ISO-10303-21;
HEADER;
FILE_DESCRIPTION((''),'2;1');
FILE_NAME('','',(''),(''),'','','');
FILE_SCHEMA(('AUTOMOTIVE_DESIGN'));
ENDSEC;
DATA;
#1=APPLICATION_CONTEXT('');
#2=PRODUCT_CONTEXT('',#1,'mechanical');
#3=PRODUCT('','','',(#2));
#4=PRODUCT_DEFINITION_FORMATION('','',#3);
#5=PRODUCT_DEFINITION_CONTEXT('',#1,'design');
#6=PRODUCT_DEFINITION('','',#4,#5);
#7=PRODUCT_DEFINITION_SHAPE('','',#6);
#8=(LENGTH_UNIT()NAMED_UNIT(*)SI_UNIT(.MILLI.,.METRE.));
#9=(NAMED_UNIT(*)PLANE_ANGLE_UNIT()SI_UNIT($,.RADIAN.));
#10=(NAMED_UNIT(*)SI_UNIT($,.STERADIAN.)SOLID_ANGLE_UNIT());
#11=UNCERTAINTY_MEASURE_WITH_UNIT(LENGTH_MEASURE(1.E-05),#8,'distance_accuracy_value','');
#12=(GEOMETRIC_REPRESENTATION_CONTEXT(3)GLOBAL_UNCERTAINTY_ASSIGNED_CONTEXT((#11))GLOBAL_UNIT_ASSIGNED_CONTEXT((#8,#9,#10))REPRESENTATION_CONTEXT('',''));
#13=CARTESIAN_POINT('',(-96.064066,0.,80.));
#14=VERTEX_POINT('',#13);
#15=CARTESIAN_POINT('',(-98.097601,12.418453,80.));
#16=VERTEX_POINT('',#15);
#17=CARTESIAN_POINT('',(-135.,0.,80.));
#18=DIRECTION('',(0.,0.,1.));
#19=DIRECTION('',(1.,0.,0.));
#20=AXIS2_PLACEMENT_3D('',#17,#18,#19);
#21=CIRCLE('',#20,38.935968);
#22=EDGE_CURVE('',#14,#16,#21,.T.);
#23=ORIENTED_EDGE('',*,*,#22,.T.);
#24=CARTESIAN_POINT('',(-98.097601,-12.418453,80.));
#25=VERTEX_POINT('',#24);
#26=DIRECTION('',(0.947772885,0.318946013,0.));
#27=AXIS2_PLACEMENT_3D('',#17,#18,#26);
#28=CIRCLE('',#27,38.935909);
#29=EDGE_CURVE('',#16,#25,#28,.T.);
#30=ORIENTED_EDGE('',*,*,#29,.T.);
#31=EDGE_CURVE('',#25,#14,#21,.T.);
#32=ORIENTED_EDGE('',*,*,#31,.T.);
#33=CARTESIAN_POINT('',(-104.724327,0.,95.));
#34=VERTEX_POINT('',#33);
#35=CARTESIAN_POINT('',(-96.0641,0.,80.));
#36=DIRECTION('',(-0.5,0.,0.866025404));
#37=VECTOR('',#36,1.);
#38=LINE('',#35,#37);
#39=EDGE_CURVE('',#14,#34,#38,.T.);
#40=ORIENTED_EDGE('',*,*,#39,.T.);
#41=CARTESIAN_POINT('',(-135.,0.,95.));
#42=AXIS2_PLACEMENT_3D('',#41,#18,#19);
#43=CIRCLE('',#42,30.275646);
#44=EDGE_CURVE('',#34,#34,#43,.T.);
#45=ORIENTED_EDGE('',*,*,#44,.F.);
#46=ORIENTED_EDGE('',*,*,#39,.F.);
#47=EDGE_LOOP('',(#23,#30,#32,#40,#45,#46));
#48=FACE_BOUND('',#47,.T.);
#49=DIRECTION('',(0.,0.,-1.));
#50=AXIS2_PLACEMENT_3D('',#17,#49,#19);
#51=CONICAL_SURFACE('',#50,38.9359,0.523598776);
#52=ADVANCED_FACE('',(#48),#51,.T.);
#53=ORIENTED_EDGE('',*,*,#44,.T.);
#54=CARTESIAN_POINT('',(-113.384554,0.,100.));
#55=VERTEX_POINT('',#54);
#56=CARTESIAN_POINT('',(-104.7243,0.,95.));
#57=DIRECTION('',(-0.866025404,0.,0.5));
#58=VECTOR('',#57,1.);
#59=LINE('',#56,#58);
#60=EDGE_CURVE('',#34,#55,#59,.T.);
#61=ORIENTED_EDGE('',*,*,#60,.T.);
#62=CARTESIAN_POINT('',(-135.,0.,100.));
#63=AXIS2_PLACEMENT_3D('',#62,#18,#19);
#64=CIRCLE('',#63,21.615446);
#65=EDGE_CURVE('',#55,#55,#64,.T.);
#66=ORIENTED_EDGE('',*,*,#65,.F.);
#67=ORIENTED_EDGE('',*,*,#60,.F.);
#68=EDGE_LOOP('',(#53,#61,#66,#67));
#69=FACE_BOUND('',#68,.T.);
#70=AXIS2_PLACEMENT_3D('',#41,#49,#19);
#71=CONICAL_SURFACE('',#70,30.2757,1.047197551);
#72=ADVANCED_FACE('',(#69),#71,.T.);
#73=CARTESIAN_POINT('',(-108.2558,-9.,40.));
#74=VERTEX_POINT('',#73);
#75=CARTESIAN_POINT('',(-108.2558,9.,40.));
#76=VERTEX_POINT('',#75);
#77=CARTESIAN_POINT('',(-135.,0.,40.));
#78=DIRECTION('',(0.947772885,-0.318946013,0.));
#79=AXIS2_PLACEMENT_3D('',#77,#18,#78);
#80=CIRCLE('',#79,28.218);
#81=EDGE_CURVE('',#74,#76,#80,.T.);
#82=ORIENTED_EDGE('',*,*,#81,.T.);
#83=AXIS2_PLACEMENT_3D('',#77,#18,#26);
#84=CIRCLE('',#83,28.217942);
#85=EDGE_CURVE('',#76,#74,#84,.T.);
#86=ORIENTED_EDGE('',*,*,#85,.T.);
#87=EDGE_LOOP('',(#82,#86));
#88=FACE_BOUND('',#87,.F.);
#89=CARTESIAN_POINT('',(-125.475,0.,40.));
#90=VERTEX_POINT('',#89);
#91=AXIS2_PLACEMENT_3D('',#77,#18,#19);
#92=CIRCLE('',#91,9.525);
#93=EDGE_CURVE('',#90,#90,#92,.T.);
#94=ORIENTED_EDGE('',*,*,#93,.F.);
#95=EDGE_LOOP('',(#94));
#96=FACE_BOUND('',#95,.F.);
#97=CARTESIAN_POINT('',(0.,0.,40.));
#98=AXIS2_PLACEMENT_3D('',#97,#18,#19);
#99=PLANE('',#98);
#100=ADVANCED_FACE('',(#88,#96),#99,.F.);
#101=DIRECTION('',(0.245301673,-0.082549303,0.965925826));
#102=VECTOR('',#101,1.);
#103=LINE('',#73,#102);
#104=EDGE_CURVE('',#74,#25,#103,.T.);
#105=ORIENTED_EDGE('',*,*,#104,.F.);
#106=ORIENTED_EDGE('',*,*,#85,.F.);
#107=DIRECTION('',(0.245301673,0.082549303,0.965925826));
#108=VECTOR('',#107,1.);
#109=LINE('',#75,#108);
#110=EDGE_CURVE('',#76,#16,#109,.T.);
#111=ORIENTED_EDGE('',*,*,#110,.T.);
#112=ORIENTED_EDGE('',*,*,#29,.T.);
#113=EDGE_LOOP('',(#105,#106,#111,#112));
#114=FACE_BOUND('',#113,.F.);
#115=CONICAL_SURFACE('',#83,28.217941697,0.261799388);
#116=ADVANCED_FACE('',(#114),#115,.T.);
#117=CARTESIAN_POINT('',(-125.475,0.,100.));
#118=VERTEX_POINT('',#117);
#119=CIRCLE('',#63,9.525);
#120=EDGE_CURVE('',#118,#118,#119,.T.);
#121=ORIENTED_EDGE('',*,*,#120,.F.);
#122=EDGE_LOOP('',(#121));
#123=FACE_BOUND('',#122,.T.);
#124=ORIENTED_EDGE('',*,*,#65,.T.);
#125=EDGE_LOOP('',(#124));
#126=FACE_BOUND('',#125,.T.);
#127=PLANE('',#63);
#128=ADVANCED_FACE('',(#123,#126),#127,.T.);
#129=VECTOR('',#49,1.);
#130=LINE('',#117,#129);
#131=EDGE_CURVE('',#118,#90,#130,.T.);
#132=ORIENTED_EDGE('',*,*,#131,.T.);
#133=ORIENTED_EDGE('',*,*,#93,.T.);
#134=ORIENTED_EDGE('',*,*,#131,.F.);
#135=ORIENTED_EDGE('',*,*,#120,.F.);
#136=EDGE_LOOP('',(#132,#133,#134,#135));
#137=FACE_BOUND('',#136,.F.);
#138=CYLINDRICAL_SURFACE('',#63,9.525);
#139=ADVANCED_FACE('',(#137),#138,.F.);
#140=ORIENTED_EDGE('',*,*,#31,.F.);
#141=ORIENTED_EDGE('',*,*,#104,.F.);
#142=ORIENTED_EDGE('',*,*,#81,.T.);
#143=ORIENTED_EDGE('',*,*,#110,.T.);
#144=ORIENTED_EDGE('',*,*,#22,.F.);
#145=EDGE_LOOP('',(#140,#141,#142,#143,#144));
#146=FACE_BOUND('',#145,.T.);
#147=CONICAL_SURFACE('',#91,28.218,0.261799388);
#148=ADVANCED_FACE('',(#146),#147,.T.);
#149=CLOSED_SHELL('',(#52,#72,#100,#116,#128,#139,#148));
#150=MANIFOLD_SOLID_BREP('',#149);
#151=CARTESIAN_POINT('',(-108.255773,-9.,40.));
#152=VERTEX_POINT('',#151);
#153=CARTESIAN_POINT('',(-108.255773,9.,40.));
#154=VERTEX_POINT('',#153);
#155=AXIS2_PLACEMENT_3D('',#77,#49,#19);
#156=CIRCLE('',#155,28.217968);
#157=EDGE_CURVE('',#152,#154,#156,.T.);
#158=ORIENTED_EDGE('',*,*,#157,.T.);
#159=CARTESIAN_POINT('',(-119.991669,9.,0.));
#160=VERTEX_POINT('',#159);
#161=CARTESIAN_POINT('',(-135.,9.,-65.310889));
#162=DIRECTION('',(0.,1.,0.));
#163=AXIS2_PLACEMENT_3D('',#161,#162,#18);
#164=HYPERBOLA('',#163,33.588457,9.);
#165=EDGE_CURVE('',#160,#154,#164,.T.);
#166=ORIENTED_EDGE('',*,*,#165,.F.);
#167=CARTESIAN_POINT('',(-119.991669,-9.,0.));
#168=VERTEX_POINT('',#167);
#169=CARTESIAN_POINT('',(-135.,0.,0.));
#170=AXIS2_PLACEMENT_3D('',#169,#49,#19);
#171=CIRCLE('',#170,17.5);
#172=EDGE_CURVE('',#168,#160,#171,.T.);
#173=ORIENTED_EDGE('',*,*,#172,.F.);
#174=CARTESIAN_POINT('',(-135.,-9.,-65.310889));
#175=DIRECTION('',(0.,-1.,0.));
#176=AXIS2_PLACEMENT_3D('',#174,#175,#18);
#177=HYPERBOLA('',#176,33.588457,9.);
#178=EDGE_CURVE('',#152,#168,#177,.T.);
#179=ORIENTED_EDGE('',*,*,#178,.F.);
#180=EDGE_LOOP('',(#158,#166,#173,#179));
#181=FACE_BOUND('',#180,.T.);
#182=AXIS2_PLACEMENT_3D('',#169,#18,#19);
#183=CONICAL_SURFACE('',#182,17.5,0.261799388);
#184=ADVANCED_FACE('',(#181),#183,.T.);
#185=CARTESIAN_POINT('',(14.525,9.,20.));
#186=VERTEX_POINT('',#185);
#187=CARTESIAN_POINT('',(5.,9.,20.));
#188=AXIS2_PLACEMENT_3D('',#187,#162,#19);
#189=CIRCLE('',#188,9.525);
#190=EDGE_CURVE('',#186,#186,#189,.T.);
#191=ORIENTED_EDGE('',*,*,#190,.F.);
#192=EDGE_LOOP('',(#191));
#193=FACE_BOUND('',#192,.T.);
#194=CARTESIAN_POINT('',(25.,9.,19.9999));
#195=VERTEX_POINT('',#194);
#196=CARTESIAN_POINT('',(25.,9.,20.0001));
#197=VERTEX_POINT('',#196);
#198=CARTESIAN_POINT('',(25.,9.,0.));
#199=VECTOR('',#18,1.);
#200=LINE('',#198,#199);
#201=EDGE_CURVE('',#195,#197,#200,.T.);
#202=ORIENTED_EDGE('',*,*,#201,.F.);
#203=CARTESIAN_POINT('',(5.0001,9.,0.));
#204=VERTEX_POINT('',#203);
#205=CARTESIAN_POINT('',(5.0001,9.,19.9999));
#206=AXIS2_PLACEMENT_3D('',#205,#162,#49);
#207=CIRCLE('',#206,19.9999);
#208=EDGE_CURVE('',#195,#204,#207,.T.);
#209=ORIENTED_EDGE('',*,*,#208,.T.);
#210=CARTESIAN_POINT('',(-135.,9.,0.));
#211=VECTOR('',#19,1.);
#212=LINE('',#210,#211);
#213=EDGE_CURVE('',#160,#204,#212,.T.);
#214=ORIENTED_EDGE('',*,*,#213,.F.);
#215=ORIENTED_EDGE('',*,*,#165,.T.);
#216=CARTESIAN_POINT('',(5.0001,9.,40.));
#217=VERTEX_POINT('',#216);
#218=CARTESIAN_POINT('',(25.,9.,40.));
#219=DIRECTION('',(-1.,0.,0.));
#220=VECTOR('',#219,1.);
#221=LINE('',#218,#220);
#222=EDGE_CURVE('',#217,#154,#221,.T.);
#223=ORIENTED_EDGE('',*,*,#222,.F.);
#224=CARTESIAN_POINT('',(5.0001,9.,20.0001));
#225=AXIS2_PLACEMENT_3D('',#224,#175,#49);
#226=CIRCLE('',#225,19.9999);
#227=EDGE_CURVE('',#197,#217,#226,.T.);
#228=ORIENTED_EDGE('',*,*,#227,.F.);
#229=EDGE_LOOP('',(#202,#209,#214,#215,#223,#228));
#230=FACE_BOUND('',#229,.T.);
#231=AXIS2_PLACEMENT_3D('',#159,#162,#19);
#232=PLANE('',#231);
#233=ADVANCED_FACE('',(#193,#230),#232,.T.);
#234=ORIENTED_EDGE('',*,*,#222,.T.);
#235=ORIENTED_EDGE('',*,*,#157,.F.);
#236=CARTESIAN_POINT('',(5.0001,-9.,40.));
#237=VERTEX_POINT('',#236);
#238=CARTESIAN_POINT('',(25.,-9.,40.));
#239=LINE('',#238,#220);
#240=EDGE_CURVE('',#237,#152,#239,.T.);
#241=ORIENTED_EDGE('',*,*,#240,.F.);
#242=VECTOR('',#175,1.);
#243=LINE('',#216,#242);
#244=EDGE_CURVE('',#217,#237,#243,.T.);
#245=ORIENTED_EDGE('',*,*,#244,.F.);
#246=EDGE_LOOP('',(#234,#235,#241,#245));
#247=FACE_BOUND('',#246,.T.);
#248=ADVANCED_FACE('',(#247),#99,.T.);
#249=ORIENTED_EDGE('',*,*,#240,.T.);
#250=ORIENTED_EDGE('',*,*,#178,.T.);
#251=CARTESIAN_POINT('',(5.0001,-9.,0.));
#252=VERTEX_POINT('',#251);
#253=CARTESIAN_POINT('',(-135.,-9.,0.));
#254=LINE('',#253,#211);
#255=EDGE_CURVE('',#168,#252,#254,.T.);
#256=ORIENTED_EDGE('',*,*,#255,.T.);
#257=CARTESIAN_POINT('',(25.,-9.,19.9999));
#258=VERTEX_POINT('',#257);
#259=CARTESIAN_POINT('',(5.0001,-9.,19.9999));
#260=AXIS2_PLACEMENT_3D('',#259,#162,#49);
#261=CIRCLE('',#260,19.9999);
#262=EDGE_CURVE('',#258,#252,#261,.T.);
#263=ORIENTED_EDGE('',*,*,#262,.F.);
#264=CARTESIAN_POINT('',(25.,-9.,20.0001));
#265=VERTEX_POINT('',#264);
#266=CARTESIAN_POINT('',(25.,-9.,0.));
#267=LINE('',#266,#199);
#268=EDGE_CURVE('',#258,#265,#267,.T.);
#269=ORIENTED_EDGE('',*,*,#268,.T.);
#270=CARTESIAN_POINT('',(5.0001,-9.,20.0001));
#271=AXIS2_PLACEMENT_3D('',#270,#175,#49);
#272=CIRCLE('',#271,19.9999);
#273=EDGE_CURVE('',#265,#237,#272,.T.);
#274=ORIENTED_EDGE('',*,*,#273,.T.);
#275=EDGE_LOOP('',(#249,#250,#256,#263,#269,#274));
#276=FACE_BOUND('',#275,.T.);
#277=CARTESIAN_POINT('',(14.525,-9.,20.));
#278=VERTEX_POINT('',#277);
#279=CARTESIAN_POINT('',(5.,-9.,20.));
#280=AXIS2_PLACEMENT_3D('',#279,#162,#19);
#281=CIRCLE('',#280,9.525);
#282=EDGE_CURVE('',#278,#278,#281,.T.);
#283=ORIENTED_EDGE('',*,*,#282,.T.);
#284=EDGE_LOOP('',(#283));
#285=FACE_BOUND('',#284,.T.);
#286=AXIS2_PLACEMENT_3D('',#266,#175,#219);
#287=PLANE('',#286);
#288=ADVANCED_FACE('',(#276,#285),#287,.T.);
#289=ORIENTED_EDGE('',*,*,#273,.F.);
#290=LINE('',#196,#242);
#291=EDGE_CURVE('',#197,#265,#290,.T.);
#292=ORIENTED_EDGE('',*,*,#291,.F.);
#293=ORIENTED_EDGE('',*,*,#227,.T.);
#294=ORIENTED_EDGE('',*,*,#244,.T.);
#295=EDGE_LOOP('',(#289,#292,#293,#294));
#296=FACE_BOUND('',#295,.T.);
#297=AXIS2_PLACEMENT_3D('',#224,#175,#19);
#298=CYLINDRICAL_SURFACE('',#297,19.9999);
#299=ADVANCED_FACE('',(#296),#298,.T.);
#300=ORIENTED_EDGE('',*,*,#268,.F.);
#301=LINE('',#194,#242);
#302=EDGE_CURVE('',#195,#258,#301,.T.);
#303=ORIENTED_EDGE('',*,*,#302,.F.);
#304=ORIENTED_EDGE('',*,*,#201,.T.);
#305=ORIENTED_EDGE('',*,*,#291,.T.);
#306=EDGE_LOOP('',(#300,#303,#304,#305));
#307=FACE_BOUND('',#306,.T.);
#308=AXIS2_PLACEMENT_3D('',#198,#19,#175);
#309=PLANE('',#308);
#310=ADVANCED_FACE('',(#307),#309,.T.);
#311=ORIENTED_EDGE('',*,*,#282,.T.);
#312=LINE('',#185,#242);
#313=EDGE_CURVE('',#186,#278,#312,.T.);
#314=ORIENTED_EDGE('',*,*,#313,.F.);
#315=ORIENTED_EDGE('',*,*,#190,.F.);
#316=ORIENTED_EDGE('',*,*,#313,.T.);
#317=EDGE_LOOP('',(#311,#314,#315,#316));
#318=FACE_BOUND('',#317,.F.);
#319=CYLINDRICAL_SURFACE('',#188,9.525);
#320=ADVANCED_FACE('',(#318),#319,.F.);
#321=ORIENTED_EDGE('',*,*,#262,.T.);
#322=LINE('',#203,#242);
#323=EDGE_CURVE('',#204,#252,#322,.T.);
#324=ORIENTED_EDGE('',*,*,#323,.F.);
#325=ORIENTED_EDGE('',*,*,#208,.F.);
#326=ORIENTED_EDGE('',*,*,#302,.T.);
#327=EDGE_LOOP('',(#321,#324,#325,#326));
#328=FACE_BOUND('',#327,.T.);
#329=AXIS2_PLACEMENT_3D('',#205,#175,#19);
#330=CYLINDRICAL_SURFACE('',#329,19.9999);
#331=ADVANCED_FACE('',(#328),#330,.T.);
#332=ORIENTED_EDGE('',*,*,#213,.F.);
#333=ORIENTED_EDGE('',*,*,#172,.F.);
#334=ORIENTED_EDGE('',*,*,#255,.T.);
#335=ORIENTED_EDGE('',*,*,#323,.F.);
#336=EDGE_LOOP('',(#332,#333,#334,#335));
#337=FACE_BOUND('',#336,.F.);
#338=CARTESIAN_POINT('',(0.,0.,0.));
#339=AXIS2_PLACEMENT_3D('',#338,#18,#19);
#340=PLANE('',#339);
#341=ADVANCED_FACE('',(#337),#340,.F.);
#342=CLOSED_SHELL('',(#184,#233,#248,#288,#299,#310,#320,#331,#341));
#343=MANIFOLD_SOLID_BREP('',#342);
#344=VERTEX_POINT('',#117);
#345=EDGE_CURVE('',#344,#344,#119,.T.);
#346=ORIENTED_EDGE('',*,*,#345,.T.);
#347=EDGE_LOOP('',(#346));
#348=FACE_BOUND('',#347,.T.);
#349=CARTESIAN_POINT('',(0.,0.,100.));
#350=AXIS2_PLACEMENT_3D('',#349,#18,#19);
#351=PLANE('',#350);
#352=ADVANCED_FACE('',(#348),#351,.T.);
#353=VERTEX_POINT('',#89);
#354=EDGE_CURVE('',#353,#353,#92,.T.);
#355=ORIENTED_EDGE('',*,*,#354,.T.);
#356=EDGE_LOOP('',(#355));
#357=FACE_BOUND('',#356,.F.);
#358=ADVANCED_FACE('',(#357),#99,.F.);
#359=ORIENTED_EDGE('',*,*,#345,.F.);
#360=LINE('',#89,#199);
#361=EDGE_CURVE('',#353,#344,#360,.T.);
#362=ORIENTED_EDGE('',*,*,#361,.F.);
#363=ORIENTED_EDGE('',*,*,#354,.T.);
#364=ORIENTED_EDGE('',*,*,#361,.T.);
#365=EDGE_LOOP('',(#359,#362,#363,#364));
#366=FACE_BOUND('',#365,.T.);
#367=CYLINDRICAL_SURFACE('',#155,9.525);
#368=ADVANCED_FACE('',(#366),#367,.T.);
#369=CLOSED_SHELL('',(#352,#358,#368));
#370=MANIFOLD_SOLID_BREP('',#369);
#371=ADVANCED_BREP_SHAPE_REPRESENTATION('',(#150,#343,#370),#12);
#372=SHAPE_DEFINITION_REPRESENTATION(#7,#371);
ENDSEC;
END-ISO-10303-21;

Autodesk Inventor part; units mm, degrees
ref_plane "YZ Plane" through (0, 0, 0) normal (1, 0, 0) x (0, 1, 0)
ref_plane "XZ Plane" through (0, 0, 0) normal (0, 1, 0) x (-1, 0, 0)
ref_plane "XY Plane" through (0, 0, 0) normal (0, 0, 1) x (1, 0, 0)
sketch "Sketch1" plane through (0, 0, 0) normal (0, 0, 1) x (1, 0, 0)
  line L0 (25, -9) -> (-135, -9)
  line L1 (-135, -9) -> (-135, 9)
  line L2 (-135, 9) -> (25, 9)
  line L3 (25, 9) -> (25, -9)
  circle A0 centre (-135, 0) radius 17.5
  point P0 (0, 0)
  dimension "d0" = 160
  dimension "d1" = 18
  dimension "d5" = 35
extrude "Extrusion1" add sketch "Sketch1" along normal blind 40 contours L0 A0 L2 L3 | L0 L1 L2 A0 picked at (-129.1667, 0)
fillet "Fillet1" radius 20 2 edges at (25, 0, 40) (25, 0, 0)
extrude "Extrusion2" add sketch "Sketch1" along normal blind 40 draft 15 contours A0 L2 L1 L0 | L0 L1 L2 A0
sketch "Sketch4" plane through (0, 0, 40) normal (0, 0, 1) x (1, 0, 0)
  line L0 (-108.2558, -9) -> (5, -9) projected
  line L1 (5, 9) -> (5, -9) projected
  line L2 (5, 9) -> (-108.2558, 9) projected
  arc A0 (-108.2558, 9) -> (-108.2558, -9) centre (-135, 0) ccw projected
  circle A1 centre (-135, 0) radius 28.218
  point P0 (0, 0)
extrude "Extrusion3" add sketch "Sketch4" along normal blind 40 draft 15 separate body contours A0 A1
sketch "Sketch5" plane through (-135, 0, 80) normal (0, 0, 1) x (1, 0, 0)
  circle A0 centre (0, 0) radius 38.9359 projected
  point P0 (135, 0)
extrude "Extrusion4" add sketch "Sketch5" along normal blind 15 draft -30 bodies 2
sketch "Sketch6" plane through (-135, 0, 95) normal (0, 0, 1) x (1, 0, 0)
  circle A0 centre (0, 0) radius 30.2757 projected
  point P0 (135, 0)
extrude "Extrusion5" add sketch "Sketch6" along normal blind 5 draft -60 bodies 2
sketch "Sketch7" plane through (-135, 0, 100) normal (0, 0, 1) x (1, 0, 0)
  circle A0 centre (0, 0) radius 21.6154 projected
  circle A1 centre (0, 0) radius 9.525
  point P0 (135, 0)
  dimension "d16" = 19.05
extrude "Extrusion6" cut sketch "Sketch7" against normal blind 90 contours A1 bodies 2
sketch "Sketch8" plane through (0, 0, 40) normal (0, 0, 1) x (1, 0, 0)
  circle A0 centre (-135, 0) radius 9.525 projected
  point P0 (0, 0)
extrude "Extrusion7" add sketch "Sketch8" along normal up to surface (60 mm away) separate body
sketch "Sketch9" plane through (5, 9, 20) normal (0, 1, 0) x (1, 0, 0)
  circle A0 centre (0, 0) radius 9.525
  point P0 (-5, 20)
  dimension "d21" = 19.05
extrude "Extrusion8" cut sketch "Sketch9" against normal through all bodies 1
properties part number "handle"
